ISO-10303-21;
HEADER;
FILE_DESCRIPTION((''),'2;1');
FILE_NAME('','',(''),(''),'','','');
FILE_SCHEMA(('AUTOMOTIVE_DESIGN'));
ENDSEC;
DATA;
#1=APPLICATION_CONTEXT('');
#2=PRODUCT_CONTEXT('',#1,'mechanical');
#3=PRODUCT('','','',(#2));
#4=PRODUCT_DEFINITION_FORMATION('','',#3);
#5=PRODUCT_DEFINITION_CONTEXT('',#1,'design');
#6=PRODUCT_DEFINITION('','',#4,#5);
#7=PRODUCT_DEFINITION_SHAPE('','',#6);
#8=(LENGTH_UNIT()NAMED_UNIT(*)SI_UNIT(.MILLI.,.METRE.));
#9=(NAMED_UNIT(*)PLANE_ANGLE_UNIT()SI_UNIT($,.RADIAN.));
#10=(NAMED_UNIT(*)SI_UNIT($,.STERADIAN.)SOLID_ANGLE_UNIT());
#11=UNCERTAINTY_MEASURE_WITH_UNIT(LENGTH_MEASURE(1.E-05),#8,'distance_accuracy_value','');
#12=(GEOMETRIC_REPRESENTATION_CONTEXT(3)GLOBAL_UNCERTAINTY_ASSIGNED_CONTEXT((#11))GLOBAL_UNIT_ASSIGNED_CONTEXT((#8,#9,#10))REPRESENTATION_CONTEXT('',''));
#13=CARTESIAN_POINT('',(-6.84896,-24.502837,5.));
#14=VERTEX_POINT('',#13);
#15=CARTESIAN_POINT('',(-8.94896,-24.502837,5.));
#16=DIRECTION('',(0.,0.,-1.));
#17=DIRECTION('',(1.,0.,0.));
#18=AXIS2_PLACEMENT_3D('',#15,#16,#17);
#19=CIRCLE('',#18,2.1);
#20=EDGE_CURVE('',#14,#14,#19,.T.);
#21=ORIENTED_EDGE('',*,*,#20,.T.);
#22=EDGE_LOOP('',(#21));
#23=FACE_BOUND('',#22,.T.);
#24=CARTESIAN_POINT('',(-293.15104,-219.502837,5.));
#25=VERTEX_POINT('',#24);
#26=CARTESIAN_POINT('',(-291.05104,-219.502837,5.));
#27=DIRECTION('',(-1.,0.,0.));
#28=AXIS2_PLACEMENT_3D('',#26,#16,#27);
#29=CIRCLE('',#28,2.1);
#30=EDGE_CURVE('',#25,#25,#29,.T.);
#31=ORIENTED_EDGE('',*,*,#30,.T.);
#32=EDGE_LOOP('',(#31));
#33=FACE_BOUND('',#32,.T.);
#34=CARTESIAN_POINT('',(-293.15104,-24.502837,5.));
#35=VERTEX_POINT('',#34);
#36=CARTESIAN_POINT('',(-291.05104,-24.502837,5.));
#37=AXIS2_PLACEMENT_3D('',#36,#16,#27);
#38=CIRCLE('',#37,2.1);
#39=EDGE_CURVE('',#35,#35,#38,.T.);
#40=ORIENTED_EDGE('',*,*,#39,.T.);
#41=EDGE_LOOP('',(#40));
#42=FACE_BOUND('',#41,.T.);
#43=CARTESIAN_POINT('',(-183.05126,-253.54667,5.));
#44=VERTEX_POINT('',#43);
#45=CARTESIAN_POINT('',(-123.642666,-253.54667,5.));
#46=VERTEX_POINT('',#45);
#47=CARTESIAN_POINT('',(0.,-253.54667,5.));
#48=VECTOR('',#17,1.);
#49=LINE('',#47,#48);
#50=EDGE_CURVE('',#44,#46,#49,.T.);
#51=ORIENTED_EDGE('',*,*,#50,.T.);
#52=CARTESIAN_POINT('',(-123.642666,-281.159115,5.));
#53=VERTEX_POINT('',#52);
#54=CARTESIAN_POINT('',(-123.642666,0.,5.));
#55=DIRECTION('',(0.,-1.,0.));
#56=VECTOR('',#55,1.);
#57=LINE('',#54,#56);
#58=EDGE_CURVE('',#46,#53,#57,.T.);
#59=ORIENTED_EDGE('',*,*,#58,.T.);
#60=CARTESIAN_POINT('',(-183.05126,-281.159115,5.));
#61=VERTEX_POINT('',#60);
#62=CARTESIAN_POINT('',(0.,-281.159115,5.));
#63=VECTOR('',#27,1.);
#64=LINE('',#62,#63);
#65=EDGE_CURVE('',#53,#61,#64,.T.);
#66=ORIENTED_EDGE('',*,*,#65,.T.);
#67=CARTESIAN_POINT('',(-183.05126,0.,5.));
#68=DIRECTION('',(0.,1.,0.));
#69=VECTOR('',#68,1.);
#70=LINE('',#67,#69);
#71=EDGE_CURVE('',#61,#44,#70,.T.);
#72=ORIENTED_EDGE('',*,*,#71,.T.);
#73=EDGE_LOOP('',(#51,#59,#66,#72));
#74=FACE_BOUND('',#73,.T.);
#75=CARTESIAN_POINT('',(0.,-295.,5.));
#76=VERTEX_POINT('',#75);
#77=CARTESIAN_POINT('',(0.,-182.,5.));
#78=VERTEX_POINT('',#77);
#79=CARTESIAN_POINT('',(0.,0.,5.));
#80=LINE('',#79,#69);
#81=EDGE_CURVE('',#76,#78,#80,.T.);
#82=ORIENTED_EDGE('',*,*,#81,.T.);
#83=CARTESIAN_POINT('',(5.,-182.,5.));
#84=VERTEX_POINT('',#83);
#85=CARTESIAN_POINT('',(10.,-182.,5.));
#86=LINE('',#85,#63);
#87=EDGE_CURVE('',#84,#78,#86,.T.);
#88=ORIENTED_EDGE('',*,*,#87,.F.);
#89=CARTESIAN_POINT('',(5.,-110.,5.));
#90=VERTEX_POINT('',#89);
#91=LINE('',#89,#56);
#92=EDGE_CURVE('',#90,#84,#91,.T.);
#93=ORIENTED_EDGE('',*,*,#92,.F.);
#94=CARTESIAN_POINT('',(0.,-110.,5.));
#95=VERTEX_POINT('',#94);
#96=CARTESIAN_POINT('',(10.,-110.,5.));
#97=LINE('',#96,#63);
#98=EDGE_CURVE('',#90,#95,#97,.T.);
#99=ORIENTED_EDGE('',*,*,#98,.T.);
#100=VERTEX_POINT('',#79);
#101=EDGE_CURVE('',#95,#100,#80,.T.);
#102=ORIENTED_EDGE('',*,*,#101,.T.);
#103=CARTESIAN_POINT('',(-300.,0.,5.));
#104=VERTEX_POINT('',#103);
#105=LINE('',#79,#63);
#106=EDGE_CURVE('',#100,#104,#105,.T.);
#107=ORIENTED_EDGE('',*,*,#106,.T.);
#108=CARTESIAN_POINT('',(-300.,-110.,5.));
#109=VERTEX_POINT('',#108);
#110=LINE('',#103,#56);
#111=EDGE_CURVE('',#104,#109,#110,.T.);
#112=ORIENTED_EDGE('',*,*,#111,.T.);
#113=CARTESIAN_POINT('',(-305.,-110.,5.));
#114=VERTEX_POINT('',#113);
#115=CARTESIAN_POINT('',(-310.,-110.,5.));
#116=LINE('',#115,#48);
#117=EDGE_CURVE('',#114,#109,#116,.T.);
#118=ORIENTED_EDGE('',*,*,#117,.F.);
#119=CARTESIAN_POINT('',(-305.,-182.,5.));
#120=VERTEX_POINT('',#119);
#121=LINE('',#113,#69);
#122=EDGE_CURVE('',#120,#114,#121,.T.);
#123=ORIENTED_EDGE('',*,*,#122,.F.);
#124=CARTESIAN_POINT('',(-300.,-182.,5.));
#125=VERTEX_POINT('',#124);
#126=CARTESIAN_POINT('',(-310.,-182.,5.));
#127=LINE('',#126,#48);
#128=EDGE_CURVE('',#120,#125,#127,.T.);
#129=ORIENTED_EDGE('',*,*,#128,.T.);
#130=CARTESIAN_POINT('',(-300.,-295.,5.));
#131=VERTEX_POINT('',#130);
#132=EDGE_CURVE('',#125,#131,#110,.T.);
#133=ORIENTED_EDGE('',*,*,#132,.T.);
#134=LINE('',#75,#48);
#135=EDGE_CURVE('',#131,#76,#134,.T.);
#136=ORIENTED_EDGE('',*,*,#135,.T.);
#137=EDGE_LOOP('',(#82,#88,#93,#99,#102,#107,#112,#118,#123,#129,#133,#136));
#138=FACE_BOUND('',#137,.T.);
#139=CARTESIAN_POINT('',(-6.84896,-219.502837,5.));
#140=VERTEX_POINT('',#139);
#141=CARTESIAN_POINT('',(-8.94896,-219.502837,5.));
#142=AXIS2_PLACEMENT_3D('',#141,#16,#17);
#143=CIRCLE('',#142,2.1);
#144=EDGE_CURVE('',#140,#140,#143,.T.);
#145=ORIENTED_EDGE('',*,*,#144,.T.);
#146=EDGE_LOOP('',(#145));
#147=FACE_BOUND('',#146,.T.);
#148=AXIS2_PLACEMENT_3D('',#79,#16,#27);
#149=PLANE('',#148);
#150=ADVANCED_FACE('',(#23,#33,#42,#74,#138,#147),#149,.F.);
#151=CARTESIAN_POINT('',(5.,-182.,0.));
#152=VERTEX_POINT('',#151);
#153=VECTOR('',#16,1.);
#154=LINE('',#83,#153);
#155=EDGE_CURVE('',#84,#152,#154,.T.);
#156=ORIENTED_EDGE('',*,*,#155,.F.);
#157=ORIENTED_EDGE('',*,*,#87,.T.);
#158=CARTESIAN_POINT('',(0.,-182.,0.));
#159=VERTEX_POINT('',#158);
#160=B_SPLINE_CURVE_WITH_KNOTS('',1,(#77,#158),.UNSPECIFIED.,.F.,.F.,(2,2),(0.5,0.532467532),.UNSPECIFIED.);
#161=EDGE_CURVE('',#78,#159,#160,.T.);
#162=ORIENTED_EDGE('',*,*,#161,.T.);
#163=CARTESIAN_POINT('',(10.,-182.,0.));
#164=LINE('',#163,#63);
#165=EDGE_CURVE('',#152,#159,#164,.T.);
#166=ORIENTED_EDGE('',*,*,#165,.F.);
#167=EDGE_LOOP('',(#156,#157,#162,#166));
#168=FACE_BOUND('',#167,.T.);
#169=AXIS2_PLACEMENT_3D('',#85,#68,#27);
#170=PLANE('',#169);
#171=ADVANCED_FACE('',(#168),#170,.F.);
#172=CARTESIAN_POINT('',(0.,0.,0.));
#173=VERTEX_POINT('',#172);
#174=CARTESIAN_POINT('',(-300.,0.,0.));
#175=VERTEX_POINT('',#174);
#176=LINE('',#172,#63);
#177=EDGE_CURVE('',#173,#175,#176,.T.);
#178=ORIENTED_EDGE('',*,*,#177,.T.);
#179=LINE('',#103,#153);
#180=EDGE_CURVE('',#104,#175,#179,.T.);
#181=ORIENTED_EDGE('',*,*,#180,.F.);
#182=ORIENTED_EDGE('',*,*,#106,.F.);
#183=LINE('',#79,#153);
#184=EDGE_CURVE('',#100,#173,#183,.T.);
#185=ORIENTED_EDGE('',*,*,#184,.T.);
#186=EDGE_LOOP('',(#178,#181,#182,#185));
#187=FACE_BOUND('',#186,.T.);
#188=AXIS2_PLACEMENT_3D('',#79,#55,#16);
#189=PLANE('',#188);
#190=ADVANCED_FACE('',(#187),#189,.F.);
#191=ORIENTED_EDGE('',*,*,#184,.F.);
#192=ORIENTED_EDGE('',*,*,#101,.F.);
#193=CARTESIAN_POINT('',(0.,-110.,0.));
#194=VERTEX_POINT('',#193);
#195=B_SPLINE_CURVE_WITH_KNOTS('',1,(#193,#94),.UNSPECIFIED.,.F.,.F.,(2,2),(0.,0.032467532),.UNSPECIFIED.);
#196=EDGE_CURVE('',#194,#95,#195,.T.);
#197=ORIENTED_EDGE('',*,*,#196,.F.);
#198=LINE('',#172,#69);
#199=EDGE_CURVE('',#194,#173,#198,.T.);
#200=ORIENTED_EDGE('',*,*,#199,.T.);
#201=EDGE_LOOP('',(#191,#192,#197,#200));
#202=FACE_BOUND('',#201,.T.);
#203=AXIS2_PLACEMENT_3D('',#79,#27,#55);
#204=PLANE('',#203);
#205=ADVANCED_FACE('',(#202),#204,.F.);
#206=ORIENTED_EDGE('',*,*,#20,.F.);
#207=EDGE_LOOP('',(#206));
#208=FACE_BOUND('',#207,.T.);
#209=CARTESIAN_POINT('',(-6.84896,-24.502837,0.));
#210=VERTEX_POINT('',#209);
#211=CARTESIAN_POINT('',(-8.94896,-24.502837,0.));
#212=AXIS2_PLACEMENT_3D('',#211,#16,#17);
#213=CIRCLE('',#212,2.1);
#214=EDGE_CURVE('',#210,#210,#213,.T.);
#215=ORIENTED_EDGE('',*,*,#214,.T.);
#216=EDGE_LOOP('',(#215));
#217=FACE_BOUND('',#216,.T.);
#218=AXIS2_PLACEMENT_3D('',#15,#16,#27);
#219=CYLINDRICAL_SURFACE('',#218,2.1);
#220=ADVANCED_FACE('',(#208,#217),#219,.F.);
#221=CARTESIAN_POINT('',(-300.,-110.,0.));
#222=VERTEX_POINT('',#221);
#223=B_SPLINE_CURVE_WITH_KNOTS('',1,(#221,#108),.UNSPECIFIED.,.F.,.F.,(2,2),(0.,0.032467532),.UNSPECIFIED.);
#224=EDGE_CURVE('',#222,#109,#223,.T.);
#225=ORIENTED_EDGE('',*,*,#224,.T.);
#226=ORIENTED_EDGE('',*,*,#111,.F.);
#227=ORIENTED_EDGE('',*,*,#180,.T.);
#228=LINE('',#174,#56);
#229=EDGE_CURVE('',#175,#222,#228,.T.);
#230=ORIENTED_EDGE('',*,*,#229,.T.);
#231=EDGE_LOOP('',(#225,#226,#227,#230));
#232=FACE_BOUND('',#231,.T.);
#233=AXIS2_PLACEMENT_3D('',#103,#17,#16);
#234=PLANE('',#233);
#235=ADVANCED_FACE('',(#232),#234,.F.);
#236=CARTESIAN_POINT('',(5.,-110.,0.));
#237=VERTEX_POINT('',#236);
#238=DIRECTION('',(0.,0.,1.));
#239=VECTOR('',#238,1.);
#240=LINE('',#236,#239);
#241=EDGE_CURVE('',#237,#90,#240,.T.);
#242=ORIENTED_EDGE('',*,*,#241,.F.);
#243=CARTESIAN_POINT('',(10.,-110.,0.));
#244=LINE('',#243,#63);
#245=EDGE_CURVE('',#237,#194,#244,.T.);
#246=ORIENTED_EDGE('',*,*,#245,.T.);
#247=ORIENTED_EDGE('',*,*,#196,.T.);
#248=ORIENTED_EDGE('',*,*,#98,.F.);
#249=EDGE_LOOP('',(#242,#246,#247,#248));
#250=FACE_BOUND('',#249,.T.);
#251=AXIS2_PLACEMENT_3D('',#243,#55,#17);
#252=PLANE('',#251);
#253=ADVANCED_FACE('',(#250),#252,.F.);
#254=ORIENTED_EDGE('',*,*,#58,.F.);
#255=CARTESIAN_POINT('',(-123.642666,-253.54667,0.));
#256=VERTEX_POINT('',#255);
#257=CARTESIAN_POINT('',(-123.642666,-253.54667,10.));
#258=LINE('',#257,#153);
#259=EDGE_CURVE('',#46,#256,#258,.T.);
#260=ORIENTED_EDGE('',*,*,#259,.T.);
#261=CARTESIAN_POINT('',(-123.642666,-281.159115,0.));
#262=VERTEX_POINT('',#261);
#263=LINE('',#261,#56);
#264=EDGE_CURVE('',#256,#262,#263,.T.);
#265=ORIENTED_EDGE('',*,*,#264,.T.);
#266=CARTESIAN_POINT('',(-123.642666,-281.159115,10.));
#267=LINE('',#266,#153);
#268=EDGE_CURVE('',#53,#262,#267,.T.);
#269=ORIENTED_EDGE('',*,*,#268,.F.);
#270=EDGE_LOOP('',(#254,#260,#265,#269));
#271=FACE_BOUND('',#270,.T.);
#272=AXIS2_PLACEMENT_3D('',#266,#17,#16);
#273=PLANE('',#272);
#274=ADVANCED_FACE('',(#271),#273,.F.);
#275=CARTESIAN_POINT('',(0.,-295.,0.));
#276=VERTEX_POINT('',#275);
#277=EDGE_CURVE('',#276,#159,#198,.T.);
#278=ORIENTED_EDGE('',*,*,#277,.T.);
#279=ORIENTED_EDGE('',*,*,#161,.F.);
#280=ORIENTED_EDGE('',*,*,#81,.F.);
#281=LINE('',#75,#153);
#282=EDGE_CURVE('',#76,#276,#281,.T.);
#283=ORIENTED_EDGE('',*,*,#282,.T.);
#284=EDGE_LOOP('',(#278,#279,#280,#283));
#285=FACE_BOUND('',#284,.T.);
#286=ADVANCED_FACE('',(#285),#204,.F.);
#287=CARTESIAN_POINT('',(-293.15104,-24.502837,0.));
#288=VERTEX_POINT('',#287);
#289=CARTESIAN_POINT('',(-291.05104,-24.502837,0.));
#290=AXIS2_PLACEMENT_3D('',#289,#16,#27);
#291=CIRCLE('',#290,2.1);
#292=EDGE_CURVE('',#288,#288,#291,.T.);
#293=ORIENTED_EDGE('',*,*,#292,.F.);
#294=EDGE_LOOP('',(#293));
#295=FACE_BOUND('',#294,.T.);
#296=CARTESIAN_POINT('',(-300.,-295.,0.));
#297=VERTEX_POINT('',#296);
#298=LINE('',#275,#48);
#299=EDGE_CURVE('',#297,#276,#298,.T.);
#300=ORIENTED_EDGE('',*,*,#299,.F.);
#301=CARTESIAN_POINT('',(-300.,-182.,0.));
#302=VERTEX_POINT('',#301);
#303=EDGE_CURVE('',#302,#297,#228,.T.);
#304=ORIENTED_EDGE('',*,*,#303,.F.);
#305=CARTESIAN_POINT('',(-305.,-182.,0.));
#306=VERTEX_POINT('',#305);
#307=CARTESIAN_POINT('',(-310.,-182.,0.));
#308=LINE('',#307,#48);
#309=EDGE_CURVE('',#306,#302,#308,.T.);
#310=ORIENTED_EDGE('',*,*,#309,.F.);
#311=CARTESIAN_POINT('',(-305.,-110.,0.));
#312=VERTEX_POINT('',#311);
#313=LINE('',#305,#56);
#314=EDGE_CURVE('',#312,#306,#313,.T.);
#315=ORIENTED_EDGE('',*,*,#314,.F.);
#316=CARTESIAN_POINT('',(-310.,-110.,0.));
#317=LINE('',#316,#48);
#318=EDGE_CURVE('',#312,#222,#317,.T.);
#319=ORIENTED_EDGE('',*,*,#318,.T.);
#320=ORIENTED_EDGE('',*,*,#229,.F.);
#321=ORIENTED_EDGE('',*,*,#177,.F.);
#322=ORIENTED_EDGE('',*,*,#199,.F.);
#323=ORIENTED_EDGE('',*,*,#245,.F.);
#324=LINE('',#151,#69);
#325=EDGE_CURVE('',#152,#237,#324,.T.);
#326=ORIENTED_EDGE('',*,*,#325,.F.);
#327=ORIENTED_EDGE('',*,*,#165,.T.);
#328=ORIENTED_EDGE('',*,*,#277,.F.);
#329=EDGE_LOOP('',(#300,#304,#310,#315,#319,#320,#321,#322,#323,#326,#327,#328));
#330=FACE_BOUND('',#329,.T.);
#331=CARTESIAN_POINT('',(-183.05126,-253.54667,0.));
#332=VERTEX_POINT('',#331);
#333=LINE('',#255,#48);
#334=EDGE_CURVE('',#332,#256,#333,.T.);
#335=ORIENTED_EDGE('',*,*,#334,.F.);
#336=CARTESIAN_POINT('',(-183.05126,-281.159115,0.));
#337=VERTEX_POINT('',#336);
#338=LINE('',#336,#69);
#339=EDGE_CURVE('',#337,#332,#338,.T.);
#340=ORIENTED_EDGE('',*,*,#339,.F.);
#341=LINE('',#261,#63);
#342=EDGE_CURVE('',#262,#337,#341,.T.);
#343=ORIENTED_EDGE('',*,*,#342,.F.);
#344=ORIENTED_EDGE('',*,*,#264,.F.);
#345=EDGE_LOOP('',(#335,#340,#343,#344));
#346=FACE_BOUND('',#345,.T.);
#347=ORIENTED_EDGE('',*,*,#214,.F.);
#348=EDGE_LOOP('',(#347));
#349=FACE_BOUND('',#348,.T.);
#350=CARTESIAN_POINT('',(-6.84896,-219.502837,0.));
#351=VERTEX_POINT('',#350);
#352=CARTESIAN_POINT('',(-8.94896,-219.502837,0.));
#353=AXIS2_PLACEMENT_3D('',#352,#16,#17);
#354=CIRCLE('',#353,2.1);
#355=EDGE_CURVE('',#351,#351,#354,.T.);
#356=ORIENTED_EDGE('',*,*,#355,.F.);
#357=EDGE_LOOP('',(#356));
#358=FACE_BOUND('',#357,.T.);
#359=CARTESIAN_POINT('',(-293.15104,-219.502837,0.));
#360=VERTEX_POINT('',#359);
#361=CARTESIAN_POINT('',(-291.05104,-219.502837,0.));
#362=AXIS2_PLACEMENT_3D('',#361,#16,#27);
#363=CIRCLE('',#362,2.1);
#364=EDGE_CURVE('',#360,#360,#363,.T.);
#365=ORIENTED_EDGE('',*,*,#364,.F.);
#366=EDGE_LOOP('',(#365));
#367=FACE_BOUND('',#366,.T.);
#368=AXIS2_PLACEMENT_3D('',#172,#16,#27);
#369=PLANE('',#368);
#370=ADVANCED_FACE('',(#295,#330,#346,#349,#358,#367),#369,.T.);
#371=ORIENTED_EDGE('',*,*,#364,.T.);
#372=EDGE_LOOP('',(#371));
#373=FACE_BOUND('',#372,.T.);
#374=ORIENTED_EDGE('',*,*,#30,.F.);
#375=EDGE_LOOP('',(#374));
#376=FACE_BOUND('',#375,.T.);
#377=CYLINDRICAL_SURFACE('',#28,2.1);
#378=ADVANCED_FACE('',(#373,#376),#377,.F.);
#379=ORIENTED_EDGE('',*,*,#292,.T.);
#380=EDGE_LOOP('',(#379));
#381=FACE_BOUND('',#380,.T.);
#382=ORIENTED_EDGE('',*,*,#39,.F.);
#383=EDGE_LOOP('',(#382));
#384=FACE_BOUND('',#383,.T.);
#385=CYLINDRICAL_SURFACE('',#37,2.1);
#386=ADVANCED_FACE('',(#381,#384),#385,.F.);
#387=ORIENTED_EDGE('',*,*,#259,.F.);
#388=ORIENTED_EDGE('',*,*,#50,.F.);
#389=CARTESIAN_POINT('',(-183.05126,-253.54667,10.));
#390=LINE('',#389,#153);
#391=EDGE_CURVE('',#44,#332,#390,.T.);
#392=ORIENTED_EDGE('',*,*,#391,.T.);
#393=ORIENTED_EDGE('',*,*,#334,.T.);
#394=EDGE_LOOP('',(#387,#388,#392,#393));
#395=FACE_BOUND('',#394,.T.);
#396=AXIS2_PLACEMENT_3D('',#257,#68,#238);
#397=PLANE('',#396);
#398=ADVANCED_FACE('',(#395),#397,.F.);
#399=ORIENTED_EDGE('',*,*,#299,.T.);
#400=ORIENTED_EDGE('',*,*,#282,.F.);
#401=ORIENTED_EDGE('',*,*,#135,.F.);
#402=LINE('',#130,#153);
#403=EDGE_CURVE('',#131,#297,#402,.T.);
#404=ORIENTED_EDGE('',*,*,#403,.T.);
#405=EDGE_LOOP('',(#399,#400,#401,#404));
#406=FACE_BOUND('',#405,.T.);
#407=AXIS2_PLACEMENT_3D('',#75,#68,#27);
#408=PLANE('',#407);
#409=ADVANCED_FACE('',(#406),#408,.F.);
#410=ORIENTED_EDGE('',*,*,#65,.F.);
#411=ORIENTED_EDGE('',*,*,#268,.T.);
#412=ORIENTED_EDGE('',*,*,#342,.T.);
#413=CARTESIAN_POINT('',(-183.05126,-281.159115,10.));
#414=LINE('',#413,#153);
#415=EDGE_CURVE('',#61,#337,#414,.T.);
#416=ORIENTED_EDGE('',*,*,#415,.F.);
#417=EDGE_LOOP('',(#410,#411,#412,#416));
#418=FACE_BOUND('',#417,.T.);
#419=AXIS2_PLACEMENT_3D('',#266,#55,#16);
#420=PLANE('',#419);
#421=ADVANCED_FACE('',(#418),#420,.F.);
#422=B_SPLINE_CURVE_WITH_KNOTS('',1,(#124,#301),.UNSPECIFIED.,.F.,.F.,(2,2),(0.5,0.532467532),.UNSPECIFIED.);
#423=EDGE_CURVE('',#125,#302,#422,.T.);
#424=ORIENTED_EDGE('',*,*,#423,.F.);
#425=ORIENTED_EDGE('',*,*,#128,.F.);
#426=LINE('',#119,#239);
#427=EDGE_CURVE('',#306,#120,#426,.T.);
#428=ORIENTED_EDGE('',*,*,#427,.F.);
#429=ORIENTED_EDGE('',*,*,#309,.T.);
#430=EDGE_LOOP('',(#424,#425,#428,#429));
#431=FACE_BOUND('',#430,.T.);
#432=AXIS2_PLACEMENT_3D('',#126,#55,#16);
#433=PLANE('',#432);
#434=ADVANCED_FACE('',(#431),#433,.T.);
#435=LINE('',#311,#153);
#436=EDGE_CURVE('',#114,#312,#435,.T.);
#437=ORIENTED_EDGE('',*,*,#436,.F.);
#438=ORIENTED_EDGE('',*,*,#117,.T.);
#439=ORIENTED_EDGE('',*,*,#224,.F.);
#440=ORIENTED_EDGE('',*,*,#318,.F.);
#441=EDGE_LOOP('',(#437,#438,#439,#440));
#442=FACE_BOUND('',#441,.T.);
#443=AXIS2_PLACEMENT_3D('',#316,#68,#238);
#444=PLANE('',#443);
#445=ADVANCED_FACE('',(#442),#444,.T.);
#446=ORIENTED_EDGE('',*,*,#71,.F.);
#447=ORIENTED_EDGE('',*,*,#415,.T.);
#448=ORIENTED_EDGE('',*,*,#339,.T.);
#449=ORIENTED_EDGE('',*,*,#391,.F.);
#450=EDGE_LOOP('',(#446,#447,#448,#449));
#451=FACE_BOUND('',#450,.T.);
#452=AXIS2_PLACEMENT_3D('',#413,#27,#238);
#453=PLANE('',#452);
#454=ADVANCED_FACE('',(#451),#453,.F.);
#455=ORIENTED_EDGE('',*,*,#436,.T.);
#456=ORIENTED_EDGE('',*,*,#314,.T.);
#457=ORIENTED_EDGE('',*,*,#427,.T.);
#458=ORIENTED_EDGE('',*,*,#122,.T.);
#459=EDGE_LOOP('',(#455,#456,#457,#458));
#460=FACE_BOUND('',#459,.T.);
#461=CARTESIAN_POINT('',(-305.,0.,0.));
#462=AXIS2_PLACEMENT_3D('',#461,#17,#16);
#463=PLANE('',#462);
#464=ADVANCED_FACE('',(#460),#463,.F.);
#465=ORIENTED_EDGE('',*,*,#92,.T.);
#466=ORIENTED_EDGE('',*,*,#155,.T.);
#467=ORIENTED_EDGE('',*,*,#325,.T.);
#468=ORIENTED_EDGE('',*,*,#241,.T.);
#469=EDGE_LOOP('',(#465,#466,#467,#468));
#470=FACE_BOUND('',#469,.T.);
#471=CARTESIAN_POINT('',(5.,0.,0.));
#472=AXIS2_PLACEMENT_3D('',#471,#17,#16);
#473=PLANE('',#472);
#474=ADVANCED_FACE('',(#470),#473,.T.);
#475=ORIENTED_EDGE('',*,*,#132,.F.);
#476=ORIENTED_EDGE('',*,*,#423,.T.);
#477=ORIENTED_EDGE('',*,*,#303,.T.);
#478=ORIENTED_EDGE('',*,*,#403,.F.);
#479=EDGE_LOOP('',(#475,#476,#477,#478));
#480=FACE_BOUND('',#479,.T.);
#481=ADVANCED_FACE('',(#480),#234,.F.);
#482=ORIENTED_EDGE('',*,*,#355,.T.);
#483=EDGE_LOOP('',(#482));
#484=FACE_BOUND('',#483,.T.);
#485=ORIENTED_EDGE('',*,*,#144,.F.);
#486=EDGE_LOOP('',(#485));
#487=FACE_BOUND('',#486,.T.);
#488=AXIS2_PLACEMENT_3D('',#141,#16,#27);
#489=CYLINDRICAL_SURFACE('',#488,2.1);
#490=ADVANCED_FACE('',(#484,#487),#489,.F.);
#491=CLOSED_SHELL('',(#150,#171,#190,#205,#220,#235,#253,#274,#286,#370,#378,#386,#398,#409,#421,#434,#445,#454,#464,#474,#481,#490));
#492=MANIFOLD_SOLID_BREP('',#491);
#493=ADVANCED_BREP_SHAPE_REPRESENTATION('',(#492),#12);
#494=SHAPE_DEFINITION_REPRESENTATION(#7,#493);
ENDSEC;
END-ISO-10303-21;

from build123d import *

# Parameters (mm, degrees)
ESQUISSE1_W                        = 300
ESQUISSE1_H                        = 295
BOSS_EXTRU_1_DEPTH                 = 5
TENON_START                        = -182
TENON_ET_MORTAISE_TENON1_OUTLINE_W = 5
TENON_ET_MORTAISE_TENON1_OUTLINE_H = 5
TENON_ET_MORTAISE_TENON1_DEPTH     = 72
TENON_ET_MORTAISE_TENON2_OUTLINE_W = 5
TENON_ET_MORTAISE_TENON2_OUTLINE_H = 5
TENON_ET_MORTAISE_TENON2_DEPTH     = 72
ESQUISSE2_W                        = 59.408594242
ESQUISSE2_H                        = 27.612445211
ENL_V_MAT_EXTRU_2_DEPTH            = 10
ESQUISSE3_R                        = 2.100000001
ENL_V_MAT_EXTRU_3_DEPTH            = 425.352447854
ESQUISSE4_R                        = 2.1
ENL_V_MAT_EXTRU_4_DEPTH            = 425.352447854
ESQUISSE5_R                        = 2.1
ENL_V_MAT_EXTRU_5_DEPTH            = 425.352447854


# Read off the part's stored shape, not the designer's step: Tenon et mortaise-Tenon1, Tenon et mortaise-Tenon2
with BuildPart() as part:
    # Esquisse1 → Boss.-Extru.1 (new body)
    with BuildSketch(Plane.XY):
        with Locations((-150, -147.5)):
            Rectangle(ESQUISSE1_W, ESQUISSE1_H)
    extrude(amount=BOSS_EXTRU_1_DEPTH)

    # Tenon et mortaise-Tenon1 outline → Tenon et mortaise-Tenon1 (add)
    with BuildSketch(Plane(origin=(0, 0, 0), x_dir=(1, 0, 0), z_dir=(0, 1, 0)).offset(TENON_START)):
        with Locations((2.5, -2.5)):
            Rectangle(TENON_ET_MORTAISE_TENON1_OUTLINE_W, TENON_ET_MORTAISE_TENON1_OUTLINE_H)
    extrude(amount=TENON_ET_MORTAISE_TENON1_DEPTH)

    # Tenon et mortaise-Tenon2 outline → Tenon et mortaise-Tenon2 (add)
    with BuildSketch(Plane(origin=(0, 0, 0), x_dir=(1, 0, 0), z_dir=(0, 1, 0)).offset(TENON_START)):
        with Locations((-302.5, -2.5)):
            Rectangle(TENON_ET_MORTAISE_TENON2_OUTLINE_W, TENON_ET_MORTAISE_TENON2_OUTLINE_H)
    extrude(amount=TENON_ET_MORTAISE_TENON2_DEPTH)

    # Esquisse2 → Enlèv. mat.-Extru.2 (cut)
    with BuildSketch(Plane(origin=(0, 0, 0), x_dir=(-1, 0, 0), z_dir=(0, 0, -1))):
        with Locations((153.346963056, -267.352892149)):
            Rectangle(ESQUISSE2_W, ESQUISSE2_H)
    extrude(amount=-ENL_V_MAT_EXTRU_2_DEPTH, mode=Mode.SUBTRACT)

    # Esquisse3 → Enlèv. mat.-Extru.3 (cut, through all)
    with BuildSketch(Plane(origin=(0, 0, 0), x_dir=(-1, 0, 0), z_dir=(0, 0, -1))):
        with Locations((291.051040249, -219.502837044)):
            Circle(ESQUISSE3_R)
        with Locations(Location((8.948959751, -219.502837044, 0), (0, 0, 180))):
            Circle(ESQUISSE3_R)
    extrude(amount=-ENL_V_MAT_EXTRU_3_DEPTH, mode=Mode.SUBTRACT)

    # Esquisse4 → Enlèv. mat.-Extru.4 (cut, through all)
    with BuildSketch(Plane(origin=(0, 0, 0), x_dir=(-1, 0, 0), z_dir=(0, 0, -1))):
        with Locations((291.051040249, -24.502837044)):
            Circle(ESQUISSE4_R)
    extrude(amount=-ENL_V_MAT_EXTRU_4_DEPTH, mode=Mode.SUBTRACT)

    # Esquisse5 → Enlèv. mat.-Extru.5 (cut, through all)
    with BuildSketch(Plane(origin=(0, 0, 0), x_dir=(-1, 0, 0), z_dir=(0, 0, -1))):
        with Locations((291.051040249, -24.502837044)):
            Circle(ESQUISSE5_R)
        with Locations(Location((8.948959751, -24.502837044, 0), (0, 0, 180))):
            Circle(ESQUISSE5_R)
    extrude(amount=-ENL_V_MAT_EXTRU_5_DEPTH, mode=Mode.SUBTRACT)


solid = part.part
